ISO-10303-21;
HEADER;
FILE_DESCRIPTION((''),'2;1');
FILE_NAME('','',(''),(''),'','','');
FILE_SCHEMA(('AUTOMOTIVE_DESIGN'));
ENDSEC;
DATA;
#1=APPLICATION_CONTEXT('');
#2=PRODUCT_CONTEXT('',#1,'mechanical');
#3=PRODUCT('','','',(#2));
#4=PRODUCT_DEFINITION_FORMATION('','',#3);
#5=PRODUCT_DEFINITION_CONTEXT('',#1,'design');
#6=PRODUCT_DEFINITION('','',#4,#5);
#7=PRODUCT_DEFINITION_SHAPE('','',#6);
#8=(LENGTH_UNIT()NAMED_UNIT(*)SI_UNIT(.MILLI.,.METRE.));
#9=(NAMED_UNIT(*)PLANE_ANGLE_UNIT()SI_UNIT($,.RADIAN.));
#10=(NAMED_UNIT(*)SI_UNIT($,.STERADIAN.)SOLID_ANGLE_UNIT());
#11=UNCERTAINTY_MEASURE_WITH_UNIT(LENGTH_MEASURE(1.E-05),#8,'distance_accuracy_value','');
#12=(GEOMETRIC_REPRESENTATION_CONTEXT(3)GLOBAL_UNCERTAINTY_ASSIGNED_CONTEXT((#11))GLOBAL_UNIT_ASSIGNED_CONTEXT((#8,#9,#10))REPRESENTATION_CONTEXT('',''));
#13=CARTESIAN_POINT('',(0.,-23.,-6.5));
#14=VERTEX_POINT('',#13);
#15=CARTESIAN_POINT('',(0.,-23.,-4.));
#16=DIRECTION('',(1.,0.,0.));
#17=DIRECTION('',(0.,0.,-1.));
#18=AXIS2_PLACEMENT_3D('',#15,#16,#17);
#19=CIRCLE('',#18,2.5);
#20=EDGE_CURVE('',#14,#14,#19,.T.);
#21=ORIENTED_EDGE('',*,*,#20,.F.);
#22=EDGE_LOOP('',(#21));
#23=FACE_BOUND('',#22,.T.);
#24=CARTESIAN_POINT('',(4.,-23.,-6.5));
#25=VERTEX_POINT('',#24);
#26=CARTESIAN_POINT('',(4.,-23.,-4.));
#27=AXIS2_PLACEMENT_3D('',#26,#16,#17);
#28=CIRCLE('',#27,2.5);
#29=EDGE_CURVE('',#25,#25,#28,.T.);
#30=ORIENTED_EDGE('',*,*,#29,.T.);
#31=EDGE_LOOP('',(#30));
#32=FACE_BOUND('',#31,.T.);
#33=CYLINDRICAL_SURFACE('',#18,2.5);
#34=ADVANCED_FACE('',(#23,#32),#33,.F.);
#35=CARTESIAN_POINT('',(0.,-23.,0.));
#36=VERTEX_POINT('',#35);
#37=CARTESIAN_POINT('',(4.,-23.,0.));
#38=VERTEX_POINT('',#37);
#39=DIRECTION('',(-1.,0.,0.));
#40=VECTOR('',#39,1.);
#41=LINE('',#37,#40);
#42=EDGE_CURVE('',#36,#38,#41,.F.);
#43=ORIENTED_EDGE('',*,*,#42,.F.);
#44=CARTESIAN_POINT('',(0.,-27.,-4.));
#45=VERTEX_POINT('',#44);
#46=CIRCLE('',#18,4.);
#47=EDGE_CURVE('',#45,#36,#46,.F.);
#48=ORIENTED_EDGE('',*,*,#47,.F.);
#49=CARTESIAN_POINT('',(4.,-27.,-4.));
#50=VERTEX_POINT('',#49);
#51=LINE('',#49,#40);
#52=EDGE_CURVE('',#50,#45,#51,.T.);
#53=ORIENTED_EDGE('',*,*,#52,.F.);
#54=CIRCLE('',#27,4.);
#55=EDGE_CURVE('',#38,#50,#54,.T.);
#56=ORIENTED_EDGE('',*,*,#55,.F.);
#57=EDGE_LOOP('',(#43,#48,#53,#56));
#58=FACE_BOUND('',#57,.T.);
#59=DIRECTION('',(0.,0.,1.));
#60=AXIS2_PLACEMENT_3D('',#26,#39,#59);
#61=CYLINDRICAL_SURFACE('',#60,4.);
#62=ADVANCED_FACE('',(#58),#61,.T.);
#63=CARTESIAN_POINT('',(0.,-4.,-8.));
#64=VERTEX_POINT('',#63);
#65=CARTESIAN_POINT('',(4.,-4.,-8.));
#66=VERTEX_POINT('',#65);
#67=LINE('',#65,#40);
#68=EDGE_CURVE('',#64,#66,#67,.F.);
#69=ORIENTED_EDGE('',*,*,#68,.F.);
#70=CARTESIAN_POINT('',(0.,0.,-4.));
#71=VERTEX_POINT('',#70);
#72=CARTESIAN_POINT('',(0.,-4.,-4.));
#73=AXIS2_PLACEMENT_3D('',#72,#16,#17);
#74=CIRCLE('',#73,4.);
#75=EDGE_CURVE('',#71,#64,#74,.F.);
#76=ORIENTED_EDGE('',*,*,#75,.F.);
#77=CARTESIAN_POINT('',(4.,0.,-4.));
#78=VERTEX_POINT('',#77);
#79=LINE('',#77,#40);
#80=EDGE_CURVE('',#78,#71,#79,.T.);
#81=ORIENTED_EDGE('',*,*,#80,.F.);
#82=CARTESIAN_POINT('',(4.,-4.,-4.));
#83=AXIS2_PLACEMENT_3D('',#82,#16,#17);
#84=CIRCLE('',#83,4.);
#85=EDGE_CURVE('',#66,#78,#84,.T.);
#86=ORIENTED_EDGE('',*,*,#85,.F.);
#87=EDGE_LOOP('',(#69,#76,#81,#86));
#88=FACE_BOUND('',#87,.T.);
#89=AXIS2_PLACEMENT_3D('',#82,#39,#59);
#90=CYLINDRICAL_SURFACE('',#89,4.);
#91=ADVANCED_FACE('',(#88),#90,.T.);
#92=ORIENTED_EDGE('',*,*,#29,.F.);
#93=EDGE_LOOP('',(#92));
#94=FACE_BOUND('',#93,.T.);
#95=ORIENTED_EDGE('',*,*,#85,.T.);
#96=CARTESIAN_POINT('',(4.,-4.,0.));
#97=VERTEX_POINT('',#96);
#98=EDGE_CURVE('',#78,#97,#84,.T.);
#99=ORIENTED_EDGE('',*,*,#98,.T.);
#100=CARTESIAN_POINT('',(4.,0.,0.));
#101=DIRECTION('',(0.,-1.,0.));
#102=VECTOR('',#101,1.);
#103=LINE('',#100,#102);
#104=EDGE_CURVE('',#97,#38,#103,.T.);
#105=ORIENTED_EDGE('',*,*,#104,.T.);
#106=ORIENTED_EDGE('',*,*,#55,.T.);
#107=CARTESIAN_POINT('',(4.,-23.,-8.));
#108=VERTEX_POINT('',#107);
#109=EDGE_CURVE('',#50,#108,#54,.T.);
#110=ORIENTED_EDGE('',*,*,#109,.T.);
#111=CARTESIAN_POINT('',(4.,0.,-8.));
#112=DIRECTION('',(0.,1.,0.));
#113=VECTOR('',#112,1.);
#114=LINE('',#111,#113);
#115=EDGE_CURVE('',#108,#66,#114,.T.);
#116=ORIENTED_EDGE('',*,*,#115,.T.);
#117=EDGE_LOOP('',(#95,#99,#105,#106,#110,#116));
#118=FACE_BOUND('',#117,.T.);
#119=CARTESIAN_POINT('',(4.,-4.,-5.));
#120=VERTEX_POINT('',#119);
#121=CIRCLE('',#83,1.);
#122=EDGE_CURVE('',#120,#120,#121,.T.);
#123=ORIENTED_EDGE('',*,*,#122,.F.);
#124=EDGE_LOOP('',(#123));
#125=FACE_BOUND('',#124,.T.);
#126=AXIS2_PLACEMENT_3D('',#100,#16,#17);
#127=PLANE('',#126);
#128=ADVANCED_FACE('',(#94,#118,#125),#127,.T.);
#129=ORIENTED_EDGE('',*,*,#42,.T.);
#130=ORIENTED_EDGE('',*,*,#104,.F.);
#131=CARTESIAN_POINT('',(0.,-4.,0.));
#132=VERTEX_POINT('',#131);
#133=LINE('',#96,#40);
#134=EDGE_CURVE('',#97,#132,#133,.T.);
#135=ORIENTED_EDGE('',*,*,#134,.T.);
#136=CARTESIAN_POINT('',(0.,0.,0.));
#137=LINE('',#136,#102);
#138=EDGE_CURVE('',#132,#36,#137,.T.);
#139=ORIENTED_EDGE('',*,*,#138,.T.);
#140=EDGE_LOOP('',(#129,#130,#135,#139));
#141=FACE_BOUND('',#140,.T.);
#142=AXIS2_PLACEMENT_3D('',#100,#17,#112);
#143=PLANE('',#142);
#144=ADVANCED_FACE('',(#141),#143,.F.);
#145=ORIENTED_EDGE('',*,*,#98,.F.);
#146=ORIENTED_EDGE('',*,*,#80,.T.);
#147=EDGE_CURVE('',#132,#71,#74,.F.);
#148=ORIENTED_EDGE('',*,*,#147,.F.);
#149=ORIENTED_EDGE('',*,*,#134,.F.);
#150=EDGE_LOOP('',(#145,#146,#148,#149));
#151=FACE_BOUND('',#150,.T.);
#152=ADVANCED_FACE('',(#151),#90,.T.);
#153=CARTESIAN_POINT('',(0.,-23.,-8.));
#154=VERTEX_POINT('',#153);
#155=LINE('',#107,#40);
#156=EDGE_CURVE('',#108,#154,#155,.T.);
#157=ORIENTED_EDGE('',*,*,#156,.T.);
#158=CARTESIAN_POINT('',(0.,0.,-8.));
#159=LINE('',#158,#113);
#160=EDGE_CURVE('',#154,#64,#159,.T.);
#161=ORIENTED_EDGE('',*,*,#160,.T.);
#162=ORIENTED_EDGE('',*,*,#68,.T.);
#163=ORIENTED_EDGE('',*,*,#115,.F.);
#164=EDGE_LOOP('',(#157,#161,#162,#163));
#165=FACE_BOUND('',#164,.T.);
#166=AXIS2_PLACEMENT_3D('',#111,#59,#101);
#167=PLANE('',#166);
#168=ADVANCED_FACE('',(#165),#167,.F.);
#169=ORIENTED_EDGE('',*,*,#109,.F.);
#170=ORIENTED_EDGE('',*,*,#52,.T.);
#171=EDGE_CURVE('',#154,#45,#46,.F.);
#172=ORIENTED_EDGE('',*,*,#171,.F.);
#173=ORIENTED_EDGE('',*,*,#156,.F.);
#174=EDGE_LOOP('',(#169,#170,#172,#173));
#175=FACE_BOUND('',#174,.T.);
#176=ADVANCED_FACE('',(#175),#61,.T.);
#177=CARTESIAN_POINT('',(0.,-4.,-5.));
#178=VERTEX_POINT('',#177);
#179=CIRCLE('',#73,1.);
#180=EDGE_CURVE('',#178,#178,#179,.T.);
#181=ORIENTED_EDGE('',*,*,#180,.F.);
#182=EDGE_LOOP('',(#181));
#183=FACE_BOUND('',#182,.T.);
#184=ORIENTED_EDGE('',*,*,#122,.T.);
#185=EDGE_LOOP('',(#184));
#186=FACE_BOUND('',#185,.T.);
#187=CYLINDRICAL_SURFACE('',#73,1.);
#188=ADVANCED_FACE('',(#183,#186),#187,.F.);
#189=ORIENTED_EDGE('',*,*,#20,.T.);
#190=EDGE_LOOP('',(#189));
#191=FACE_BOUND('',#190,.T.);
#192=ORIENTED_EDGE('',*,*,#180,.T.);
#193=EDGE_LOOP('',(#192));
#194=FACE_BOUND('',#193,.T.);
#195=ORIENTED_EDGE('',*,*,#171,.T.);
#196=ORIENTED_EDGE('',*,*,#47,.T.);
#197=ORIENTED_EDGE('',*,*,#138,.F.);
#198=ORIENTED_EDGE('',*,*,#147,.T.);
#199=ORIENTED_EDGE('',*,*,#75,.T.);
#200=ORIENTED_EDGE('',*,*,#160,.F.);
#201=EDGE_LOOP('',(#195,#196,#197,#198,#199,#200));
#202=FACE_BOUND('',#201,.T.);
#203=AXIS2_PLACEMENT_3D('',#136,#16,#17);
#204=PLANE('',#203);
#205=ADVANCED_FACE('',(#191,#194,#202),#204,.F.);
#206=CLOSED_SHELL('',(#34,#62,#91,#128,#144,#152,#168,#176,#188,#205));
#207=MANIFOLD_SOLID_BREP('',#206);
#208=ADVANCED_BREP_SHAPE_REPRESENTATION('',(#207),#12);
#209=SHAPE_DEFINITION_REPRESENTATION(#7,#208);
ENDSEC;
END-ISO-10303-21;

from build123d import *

# Parameters (mm, degrees)
SKETCH1_W           = 8
SKETCH1_H           = 27
BOSS_EXTRUDE1_DEPTH = 4
SKETCH2_R           = 2.5
SKETCH2_R_2         = 1
CUT_EXTRUDE1_DEPTH  = 29.442925307
FILLET1_R           = 4


with BuildPart() as part:
    # Sketch1 → Boss-Extrude1 (new body)
    with BuildSketch(Plane(origin=(0, 0, 0), x_dir=(0, 0, -1), z_dir=(1, 0, 0))):
        with Locations((4, -13.5)):
            Rectangle(SKETCH1_W, SKETCH1_H)
    extrude(amount=BOSS_EXTRUDE1_DEPTH)

    # Sketch2 → Cut-Extrude1 (cut, through all)
    with BuildSketch(Plane(origin=(4, 0, 0), x_dir=(0, 0, -1), z_dir=(1, 0, 0))):
        with Locations((4, -23)):
            Circle(SKETCH2_R)
        with Locations((4, -4)):
            Circle(SKETCH2_R_2)
    extrude(amount=-CUT_EXTRUDE1_DEPTH, mode=Mode.SUBTRACT)

    # Fillet1
    fillet1_edges = [part.edges().sort_by_distance(p)[0] for p in [
        (2, -27, -8),
        (2, -27, 0),
        (2, 0, 0),
        (2, 0, -8),
    ]]
    fillet(fillet1_edges, radius=FILLET1_R - 0.0001)  # a hair under: the kernel refuses the full size


solid = part.part
